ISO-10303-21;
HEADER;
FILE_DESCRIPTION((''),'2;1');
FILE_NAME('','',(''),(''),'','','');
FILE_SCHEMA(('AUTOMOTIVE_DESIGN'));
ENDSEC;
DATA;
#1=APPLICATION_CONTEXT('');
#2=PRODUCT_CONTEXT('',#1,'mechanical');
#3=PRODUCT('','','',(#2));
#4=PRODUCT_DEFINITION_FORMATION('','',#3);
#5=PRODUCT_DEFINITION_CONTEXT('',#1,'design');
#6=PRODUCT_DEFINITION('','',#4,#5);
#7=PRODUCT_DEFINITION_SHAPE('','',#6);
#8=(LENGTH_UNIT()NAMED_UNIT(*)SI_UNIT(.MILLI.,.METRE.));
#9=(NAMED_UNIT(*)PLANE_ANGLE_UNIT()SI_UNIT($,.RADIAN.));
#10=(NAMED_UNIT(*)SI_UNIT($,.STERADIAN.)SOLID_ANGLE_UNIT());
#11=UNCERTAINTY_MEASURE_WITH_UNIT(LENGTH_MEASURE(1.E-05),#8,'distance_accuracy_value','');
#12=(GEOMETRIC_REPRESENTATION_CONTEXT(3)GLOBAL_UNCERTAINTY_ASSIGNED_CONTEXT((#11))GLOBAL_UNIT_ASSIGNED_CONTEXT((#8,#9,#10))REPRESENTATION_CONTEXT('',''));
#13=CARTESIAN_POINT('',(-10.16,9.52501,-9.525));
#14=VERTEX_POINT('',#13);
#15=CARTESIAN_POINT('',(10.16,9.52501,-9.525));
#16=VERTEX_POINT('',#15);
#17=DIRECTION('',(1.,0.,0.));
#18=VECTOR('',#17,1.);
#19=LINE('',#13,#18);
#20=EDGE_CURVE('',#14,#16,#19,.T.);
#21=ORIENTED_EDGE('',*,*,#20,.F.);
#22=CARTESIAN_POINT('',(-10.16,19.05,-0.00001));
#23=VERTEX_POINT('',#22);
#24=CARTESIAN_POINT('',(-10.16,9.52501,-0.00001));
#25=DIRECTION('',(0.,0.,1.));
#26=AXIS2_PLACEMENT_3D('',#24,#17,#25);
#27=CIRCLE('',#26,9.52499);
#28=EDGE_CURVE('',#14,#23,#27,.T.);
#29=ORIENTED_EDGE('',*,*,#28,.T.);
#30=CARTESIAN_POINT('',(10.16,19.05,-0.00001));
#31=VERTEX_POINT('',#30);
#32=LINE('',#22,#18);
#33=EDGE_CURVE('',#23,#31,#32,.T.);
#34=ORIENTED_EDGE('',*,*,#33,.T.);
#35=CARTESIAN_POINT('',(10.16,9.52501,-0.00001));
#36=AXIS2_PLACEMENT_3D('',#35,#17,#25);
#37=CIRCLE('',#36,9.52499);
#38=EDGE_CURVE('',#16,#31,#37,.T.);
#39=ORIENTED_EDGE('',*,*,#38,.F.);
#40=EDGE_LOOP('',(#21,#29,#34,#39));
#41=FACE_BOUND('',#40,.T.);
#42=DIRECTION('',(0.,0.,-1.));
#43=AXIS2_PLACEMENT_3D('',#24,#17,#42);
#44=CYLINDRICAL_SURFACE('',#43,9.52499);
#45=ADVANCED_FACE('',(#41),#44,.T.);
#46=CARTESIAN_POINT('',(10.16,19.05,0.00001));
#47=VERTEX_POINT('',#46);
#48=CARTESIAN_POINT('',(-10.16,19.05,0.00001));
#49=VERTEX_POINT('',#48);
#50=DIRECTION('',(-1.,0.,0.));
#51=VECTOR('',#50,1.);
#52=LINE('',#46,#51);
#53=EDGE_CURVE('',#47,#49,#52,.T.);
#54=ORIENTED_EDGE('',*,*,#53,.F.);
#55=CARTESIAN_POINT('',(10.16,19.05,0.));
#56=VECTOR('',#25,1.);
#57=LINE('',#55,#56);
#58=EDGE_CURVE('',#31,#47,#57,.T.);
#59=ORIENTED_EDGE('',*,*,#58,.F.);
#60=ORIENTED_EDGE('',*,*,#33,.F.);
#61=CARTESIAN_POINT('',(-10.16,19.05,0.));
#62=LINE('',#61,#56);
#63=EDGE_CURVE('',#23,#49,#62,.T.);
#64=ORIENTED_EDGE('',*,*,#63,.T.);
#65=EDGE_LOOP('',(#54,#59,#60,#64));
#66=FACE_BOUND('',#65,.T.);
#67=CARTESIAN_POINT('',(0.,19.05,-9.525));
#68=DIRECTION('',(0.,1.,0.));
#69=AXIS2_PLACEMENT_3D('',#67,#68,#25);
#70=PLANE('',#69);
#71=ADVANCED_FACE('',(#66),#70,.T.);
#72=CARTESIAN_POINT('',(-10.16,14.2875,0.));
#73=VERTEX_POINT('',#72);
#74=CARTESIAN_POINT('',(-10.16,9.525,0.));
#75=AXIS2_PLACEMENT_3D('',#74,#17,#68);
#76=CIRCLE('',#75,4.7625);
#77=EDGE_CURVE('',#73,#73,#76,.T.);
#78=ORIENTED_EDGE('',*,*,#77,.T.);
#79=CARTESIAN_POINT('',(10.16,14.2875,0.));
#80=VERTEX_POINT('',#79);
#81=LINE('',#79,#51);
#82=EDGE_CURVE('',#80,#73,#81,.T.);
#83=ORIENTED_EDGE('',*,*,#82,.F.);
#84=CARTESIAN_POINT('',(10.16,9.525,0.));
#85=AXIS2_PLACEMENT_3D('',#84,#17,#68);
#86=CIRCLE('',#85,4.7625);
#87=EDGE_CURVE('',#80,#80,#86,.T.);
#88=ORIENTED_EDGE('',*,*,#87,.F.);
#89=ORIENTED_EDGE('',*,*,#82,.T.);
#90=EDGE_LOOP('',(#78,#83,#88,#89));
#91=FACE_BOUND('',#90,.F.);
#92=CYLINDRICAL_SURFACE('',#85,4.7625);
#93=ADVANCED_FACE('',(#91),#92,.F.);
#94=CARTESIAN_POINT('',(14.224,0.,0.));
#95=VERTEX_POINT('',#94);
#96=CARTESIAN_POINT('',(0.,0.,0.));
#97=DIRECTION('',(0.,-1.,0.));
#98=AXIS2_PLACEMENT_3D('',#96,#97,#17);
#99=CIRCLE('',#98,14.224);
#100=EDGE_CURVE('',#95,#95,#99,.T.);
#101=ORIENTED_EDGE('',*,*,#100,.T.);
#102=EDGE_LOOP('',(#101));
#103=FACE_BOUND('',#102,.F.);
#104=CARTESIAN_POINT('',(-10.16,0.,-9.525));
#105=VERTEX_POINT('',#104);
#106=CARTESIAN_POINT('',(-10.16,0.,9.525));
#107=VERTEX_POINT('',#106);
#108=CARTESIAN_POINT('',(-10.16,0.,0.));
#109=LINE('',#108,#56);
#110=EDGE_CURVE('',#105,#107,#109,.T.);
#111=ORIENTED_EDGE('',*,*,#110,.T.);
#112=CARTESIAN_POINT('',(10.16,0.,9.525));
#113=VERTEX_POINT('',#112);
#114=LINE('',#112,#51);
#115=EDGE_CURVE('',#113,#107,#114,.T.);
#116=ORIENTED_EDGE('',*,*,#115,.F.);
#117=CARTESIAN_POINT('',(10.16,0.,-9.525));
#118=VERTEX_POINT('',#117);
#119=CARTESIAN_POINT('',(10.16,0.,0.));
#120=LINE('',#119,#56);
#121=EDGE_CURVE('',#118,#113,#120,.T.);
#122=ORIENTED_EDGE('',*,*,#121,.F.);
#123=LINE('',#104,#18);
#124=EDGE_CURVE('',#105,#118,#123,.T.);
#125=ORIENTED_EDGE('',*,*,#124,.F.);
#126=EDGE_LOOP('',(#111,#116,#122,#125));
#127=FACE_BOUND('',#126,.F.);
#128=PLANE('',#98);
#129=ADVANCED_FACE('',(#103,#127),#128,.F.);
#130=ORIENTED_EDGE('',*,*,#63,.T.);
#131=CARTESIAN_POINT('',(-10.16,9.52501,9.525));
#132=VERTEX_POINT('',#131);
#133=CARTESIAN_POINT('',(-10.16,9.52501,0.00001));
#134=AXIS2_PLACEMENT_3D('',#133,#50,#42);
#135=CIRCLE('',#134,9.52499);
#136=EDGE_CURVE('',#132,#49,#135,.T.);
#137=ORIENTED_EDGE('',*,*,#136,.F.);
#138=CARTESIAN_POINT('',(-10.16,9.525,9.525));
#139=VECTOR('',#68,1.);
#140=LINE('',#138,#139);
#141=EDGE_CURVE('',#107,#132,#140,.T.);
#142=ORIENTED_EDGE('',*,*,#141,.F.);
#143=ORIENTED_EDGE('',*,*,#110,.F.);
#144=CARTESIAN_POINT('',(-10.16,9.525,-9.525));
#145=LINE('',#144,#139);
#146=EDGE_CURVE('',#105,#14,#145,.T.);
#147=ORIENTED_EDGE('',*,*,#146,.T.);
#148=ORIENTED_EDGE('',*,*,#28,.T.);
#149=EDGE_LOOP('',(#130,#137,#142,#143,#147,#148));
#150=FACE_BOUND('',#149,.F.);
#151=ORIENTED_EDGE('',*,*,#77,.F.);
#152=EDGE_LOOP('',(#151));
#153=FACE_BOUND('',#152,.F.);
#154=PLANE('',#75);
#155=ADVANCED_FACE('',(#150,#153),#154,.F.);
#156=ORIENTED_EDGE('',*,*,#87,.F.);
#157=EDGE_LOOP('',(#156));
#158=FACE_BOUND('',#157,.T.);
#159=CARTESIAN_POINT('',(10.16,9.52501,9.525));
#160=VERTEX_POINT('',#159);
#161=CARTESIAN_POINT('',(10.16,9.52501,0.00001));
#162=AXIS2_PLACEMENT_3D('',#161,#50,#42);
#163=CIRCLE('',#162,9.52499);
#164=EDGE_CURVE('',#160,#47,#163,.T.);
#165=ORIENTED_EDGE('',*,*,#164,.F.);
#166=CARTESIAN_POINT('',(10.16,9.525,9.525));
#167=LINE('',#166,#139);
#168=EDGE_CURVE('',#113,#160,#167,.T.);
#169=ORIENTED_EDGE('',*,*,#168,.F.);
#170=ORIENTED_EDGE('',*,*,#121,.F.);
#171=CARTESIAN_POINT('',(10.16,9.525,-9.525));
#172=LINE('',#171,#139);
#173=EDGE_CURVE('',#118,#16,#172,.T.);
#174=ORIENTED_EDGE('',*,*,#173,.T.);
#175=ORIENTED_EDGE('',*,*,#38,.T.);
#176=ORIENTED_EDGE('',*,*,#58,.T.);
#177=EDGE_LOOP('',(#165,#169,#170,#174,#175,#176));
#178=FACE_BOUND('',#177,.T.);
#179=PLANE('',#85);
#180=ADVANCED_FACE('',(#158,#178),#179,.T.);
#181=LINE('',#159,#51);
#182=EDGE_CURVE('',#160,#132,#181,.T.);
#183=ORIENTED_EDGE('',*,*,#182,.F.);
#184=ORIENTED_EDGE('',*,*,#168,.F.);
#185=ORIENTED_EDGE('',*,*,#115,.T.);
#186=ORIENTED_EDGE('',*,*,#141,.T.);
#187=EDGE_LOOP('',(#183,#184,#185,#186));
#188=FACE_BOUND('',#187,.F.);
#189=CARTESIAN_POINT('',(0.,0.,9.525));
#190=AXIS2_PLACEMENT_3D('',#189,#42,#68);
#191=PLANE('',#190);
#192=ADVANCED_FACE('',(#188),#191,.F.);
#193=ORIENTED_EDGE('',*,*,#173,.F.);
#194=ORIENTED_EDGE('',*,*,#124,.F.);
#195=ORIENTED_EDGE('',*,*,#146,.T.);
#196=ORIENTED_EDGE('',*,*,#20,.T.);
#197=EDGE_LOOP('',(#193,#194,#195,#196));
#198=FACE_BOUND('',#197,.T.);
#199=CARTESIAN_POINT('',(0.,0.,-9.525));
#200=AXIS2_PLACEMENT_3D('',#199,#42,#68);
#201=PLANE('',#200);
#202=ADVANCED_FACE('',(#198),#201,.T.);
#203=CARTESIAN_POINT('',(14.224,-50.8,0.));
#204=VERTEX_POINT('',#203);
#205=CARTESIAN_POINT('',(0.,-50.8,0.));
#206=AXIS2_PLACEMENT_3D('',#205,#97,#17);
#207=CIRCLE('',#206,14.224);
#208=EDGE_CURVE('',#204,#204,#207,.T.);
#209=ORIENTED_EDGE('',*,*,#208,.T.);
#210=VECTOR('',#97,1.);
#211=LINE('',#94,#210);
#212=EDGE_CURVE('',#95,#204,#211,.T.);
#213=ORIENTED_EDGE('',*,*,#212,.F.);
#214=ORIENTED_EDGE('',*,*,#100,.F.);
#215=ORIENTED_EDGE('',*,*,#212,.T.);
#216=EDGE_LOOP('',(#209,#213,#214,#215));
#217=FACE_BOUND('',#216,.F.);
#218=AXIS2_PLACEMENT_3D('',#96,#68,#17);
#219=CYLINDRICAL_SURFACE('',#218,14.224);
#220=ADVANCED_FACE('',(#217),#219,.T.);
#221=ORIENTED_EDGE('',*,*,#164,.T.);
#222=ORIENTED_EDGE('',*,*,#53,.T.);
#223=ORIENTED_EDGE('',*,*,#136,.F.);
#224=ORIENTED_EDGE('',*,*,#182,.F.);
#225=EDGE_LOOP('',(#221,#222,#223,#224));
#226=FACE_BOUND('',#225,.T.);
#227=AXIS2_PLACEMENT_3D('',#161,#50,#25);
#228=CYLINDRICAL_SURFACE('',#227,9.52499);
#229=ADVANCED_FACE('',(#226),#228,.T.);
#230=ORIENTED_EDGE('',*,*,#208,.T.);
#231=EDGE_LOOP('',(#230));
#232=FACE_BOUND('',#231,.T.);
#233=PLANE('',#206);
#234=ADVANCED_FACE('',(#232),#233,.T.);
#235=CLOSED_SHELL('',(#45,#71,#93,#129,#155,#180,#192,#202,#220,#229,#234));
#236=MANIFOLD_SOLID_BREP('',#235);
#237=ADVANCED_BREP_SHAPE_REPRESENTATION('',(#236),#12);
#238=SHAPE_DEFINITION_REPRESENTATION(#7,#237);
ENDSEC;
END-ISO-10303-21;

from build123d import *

# Parameters (mm, degrees)
F0_R     = 14.224
F1_DEPTH = 50.8
F2_W     = 19.05
F2_H     = 19.05
F3_DEPTH = 10.16
F4_R     = 4.7625
F5_DEPTH = 25.4
F6_R     = 9.52499


# Not quite as in the source:
# - a fillet or chamfer is up to 0.001 mm smaller than in the source, because OpenCascade refuses the exact size


with BuildPart() as f1:
    # F0 (on Front) → F1 (new body)
    with BuildSketch(Plane.XZ):
        Circle(F0_R)
    extrude(amount=F1_DEPTH)

    # F2 (on Right) → F3 (join, symmetric)
    with BuildSketch(Plane.YZ):
        with Locations((9.525, 0)):
            Rectangle(F2_W, F2_H)
    extrude(amount=F3_DEPTH, both=True)

    # F4 (on face) → F5 (cut)
    with BuildSketch(Plane.YZ.offset(10.16)):
        with Locations((9.525, 0)):
            Circle(F4_R)
    extrude(amount=-F5_DEPTH, mode=Mode.SUBTRACT)

    # F6 (radius 9.525 in the source; OpenCascade refuses exactly that, so slightly less here)
    f6_edges = [f1.edges().sort_by_distance(p)[0] for p in [
        (0, 19.05, 9.525),
        (0, 19.05, -9.525),
    ]]
    fillet(f6_edges, radius=F6_R)


solid = f1.part
